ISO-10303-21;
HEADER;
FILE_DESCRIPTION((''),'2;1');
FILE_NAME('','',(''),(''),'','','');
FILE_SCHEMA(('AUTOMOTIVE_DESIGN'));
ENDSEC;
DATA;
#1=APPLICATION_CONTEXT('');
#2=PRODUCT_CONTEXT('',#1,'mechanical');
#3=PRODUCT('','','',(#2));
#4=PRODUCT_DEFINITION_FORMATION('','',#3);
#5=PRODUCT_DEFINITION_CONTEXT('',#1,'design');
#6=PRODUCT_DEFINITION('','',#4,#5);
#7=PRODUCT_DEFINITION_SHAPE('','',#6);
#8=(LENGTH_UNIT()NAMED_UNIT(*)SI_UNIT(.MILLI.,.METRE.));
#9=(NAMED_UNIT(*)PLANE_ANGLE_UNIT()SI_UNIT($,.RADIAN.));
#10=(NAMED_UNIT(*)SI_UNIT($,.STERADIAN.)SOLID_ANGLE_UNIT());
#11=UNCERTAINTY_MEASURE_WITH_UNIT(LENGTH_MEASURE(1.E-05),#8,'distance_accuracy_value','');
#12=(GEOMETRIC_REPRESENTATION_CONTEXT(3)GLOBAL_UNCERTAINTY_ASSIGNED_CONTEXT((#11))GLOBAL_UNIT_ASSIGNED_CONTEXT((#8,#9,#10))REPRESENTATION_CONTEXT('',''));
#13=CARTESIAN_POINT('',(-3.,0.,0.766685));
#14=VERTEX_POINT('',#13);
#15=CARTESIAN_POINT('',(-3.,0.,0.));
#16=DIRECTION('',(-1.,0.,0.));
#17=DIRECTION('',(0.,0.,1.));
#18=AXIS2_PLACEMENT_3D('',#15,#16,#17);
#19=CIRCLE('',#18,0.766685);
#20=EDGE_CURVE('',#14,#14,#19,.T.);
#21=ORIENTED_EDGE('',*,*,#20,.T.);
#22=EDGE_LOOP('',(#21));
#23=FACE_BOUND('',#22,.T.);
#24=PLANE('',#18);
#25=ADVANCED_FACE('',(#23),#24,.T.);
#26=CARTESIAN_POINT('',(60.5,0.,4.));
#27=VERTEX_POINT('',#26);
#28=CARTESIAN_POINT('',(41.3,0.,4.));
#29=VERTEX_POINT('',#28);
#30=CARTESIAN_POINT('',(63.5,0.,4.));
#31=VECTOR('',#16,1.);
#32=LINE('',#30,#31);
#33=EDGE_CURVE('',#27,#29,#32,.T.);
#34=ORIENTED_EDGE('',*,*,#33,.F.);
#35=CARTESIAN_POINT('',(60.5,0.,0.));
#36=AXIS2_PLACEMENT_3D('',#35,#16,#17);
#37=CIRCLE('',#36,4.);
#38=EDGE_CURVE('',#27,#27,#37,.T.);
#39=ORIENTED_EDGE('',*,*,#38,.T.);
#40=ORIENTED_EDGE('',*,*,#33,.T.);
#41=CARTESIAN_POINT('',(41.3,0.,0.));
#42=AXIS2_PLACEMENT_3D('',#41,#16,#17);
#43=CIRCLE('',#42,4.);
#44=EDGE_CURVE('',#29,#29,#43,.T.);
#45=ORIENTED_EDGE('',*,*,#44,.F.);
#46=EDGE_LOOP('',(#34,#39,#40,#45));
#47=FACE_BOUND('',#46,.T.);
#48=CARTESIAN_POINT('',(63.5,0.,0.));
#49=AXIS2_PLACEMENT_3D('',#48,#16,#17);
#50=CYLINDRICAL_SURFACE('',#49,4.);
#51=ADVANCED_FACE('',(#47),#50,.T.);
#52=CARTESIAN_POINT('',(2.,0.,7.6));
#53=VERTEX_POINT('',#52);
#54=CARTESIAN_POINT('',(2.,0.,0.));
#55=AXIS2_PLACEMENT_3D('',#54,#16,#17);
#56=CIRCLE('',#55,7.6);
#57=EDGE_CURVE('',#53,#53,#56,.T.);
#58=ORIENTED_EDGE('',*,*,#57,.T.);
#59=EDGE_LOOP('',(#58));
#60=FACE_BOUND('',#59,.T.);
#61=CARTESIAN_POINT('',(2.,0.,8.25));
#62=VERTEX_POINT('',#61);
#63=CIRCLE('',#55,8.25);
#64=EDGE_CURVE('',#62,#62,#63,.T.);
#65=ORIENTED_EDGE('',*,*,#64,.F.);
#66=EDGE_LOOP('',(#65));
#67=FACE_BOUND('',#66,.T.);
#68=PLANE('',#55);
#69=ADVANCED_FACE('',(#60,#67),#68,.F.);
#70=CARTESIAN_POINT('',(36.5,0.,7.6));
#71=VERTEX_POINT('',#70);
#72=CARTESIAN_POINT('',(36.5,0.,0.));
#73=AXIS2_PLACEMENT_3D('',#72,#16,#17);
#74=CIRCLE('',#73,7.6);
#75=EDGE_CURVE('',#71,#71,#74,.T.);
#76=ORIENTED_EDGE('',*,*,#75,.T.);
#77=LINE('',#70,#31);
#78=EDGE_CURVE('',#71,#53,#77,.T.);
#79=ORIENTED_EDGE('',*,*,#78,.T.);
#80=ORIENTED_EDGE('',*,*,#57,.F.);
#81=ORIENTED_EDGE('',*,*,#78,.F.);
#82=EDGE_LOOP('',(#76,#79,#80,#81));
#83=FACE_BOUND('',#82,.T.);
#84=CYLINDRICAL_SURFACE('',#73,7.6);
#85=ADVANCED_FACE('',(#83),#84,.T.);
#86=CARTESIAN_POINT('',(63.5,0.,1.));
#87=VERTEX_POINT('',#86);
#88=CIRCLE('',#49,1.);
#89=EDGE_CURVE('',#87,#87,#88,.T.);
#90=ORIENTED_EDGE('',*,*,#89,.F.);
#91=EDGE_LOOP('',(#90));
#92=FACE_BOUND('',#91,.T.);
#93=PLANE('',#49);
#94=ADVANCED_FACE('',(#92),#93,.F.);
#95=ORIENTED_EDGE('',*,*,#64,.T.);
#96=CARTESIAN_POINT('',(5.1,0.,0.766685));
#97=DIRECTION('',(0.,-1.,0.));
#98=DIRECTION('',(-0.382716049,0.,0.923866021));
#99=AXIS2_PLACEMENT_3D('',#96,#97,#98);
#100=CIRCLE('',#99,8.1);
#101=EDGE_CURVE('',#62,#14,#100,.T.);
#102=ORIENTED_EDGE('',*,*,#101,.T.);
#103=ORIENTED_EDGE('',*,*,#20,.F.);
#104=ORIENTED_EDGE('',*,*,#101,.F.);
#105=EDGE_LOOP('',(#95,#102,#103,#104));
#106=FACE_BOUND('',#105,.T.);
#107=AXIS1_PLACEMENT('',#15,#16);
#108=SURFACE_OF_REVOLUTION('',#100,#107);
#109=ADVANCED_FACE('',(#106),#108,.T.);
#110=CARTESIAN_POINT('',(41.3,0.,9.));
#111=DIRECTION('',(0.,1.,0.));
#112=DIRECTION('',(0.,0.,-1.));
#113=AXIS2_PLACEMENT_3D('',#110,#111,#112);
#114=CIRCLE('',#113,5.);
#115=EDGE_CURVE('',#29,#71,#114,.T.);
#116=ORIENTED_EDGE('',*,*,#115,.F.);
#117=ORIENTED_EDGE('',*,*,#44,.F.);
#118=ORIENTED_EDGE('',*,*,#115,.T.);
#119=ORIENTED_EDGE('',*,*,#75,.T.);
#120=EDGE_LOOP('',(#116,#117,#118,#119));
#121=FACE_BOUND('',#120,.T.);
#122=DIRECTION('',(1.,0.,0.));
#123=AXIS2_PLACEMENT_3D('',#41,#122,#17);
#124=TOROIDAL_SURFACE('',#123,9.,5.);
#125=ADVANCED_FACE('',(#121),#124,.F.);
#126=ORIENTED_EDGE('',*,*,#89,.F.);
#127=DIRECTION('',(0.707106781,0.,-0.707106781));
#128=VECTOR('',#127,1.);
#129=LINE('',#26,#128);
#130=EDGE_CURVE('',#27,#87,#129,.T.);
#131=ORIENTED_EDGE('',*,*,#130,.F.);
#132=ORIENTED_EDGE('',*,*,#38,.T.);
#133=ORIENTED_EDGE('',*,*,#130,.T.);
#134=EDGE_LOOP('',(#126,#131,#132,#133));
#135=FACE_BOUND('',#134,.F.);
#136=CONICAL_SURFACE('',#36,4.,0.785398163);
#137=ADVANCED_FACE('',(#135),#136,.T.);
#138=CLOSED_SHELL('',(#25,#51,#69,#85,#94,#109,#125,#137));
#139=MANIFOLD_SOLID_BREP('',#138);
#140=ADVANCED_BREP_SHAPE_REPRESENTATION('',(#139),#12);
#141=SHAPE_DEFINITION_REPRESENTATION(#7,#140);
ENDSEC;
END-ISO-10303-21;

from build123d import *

# Parameters (mm, degrees)
F3_SIZE = 3


# Not quite as in the source:
# - a fillet or chamfer that OpenCascade refuses, or shapes differently, is made with other operations: its cross-section is extruded or revolved along the edge and cut away or added


with BuildPart() as f1:
    # F0 (on Front) → F1 (revolve)
    with BuildSketch(Plane.XZ):
        Polygon((36.5, 7.6), (2, 7.6), (2, 8.25), (-3, 8.25), (-3, 0), (0, 0), (63.5, 0), (63.5, 4), (36.5, 4), align=None)
    revolve(axis=Axis((31.75, 0, 0), (-1, 0, 0)))

    # F2: fillet of radius 5 on 1 edges, made by hand

    # F2_s1 → F2_t2 (revolve)
    with BuildSketch(Plane.XZ):
        with BuildLine():
            ThreePointArc((41.3, 4), (38.3, 5), (36.5, 7.6))
            Line((36.5, 7.6), (36.5, 4))
            Line((36.5, 4), (41.3, 4))
        make_face()
    revolve(axis=Axis((36.5, 0, 0), (-1, 0, 0)))

    # F3
    f3_edges = [f1.edges().sort_by_distance(p)[0] for p in [
        (63.5, 0, -4),
    ]]
    chamfer(f3_edges, length=F3_SIZE)

    # F4: fillet of radius 8.1 on 1 edges, made by hand

    # F4_s1 → F4_t2 (revolve, cut)
    with BuildSketch(Plane.XZ):
        with BuildLine():
            ThreePointArc((2, 8.25), (-1.6349832962, 5.2666852265), (-3, 0.7666852265))
            Line((-3, 0.7666852265), (-3, 8.25))
            Line((-3, 8.25), (2, 8.25))
        make_face()
    revolve(axis=Axis((-3, 0, 0), (-1, 0, 0)), mode=Mode.SUBTRACT)


solid = f1.part
